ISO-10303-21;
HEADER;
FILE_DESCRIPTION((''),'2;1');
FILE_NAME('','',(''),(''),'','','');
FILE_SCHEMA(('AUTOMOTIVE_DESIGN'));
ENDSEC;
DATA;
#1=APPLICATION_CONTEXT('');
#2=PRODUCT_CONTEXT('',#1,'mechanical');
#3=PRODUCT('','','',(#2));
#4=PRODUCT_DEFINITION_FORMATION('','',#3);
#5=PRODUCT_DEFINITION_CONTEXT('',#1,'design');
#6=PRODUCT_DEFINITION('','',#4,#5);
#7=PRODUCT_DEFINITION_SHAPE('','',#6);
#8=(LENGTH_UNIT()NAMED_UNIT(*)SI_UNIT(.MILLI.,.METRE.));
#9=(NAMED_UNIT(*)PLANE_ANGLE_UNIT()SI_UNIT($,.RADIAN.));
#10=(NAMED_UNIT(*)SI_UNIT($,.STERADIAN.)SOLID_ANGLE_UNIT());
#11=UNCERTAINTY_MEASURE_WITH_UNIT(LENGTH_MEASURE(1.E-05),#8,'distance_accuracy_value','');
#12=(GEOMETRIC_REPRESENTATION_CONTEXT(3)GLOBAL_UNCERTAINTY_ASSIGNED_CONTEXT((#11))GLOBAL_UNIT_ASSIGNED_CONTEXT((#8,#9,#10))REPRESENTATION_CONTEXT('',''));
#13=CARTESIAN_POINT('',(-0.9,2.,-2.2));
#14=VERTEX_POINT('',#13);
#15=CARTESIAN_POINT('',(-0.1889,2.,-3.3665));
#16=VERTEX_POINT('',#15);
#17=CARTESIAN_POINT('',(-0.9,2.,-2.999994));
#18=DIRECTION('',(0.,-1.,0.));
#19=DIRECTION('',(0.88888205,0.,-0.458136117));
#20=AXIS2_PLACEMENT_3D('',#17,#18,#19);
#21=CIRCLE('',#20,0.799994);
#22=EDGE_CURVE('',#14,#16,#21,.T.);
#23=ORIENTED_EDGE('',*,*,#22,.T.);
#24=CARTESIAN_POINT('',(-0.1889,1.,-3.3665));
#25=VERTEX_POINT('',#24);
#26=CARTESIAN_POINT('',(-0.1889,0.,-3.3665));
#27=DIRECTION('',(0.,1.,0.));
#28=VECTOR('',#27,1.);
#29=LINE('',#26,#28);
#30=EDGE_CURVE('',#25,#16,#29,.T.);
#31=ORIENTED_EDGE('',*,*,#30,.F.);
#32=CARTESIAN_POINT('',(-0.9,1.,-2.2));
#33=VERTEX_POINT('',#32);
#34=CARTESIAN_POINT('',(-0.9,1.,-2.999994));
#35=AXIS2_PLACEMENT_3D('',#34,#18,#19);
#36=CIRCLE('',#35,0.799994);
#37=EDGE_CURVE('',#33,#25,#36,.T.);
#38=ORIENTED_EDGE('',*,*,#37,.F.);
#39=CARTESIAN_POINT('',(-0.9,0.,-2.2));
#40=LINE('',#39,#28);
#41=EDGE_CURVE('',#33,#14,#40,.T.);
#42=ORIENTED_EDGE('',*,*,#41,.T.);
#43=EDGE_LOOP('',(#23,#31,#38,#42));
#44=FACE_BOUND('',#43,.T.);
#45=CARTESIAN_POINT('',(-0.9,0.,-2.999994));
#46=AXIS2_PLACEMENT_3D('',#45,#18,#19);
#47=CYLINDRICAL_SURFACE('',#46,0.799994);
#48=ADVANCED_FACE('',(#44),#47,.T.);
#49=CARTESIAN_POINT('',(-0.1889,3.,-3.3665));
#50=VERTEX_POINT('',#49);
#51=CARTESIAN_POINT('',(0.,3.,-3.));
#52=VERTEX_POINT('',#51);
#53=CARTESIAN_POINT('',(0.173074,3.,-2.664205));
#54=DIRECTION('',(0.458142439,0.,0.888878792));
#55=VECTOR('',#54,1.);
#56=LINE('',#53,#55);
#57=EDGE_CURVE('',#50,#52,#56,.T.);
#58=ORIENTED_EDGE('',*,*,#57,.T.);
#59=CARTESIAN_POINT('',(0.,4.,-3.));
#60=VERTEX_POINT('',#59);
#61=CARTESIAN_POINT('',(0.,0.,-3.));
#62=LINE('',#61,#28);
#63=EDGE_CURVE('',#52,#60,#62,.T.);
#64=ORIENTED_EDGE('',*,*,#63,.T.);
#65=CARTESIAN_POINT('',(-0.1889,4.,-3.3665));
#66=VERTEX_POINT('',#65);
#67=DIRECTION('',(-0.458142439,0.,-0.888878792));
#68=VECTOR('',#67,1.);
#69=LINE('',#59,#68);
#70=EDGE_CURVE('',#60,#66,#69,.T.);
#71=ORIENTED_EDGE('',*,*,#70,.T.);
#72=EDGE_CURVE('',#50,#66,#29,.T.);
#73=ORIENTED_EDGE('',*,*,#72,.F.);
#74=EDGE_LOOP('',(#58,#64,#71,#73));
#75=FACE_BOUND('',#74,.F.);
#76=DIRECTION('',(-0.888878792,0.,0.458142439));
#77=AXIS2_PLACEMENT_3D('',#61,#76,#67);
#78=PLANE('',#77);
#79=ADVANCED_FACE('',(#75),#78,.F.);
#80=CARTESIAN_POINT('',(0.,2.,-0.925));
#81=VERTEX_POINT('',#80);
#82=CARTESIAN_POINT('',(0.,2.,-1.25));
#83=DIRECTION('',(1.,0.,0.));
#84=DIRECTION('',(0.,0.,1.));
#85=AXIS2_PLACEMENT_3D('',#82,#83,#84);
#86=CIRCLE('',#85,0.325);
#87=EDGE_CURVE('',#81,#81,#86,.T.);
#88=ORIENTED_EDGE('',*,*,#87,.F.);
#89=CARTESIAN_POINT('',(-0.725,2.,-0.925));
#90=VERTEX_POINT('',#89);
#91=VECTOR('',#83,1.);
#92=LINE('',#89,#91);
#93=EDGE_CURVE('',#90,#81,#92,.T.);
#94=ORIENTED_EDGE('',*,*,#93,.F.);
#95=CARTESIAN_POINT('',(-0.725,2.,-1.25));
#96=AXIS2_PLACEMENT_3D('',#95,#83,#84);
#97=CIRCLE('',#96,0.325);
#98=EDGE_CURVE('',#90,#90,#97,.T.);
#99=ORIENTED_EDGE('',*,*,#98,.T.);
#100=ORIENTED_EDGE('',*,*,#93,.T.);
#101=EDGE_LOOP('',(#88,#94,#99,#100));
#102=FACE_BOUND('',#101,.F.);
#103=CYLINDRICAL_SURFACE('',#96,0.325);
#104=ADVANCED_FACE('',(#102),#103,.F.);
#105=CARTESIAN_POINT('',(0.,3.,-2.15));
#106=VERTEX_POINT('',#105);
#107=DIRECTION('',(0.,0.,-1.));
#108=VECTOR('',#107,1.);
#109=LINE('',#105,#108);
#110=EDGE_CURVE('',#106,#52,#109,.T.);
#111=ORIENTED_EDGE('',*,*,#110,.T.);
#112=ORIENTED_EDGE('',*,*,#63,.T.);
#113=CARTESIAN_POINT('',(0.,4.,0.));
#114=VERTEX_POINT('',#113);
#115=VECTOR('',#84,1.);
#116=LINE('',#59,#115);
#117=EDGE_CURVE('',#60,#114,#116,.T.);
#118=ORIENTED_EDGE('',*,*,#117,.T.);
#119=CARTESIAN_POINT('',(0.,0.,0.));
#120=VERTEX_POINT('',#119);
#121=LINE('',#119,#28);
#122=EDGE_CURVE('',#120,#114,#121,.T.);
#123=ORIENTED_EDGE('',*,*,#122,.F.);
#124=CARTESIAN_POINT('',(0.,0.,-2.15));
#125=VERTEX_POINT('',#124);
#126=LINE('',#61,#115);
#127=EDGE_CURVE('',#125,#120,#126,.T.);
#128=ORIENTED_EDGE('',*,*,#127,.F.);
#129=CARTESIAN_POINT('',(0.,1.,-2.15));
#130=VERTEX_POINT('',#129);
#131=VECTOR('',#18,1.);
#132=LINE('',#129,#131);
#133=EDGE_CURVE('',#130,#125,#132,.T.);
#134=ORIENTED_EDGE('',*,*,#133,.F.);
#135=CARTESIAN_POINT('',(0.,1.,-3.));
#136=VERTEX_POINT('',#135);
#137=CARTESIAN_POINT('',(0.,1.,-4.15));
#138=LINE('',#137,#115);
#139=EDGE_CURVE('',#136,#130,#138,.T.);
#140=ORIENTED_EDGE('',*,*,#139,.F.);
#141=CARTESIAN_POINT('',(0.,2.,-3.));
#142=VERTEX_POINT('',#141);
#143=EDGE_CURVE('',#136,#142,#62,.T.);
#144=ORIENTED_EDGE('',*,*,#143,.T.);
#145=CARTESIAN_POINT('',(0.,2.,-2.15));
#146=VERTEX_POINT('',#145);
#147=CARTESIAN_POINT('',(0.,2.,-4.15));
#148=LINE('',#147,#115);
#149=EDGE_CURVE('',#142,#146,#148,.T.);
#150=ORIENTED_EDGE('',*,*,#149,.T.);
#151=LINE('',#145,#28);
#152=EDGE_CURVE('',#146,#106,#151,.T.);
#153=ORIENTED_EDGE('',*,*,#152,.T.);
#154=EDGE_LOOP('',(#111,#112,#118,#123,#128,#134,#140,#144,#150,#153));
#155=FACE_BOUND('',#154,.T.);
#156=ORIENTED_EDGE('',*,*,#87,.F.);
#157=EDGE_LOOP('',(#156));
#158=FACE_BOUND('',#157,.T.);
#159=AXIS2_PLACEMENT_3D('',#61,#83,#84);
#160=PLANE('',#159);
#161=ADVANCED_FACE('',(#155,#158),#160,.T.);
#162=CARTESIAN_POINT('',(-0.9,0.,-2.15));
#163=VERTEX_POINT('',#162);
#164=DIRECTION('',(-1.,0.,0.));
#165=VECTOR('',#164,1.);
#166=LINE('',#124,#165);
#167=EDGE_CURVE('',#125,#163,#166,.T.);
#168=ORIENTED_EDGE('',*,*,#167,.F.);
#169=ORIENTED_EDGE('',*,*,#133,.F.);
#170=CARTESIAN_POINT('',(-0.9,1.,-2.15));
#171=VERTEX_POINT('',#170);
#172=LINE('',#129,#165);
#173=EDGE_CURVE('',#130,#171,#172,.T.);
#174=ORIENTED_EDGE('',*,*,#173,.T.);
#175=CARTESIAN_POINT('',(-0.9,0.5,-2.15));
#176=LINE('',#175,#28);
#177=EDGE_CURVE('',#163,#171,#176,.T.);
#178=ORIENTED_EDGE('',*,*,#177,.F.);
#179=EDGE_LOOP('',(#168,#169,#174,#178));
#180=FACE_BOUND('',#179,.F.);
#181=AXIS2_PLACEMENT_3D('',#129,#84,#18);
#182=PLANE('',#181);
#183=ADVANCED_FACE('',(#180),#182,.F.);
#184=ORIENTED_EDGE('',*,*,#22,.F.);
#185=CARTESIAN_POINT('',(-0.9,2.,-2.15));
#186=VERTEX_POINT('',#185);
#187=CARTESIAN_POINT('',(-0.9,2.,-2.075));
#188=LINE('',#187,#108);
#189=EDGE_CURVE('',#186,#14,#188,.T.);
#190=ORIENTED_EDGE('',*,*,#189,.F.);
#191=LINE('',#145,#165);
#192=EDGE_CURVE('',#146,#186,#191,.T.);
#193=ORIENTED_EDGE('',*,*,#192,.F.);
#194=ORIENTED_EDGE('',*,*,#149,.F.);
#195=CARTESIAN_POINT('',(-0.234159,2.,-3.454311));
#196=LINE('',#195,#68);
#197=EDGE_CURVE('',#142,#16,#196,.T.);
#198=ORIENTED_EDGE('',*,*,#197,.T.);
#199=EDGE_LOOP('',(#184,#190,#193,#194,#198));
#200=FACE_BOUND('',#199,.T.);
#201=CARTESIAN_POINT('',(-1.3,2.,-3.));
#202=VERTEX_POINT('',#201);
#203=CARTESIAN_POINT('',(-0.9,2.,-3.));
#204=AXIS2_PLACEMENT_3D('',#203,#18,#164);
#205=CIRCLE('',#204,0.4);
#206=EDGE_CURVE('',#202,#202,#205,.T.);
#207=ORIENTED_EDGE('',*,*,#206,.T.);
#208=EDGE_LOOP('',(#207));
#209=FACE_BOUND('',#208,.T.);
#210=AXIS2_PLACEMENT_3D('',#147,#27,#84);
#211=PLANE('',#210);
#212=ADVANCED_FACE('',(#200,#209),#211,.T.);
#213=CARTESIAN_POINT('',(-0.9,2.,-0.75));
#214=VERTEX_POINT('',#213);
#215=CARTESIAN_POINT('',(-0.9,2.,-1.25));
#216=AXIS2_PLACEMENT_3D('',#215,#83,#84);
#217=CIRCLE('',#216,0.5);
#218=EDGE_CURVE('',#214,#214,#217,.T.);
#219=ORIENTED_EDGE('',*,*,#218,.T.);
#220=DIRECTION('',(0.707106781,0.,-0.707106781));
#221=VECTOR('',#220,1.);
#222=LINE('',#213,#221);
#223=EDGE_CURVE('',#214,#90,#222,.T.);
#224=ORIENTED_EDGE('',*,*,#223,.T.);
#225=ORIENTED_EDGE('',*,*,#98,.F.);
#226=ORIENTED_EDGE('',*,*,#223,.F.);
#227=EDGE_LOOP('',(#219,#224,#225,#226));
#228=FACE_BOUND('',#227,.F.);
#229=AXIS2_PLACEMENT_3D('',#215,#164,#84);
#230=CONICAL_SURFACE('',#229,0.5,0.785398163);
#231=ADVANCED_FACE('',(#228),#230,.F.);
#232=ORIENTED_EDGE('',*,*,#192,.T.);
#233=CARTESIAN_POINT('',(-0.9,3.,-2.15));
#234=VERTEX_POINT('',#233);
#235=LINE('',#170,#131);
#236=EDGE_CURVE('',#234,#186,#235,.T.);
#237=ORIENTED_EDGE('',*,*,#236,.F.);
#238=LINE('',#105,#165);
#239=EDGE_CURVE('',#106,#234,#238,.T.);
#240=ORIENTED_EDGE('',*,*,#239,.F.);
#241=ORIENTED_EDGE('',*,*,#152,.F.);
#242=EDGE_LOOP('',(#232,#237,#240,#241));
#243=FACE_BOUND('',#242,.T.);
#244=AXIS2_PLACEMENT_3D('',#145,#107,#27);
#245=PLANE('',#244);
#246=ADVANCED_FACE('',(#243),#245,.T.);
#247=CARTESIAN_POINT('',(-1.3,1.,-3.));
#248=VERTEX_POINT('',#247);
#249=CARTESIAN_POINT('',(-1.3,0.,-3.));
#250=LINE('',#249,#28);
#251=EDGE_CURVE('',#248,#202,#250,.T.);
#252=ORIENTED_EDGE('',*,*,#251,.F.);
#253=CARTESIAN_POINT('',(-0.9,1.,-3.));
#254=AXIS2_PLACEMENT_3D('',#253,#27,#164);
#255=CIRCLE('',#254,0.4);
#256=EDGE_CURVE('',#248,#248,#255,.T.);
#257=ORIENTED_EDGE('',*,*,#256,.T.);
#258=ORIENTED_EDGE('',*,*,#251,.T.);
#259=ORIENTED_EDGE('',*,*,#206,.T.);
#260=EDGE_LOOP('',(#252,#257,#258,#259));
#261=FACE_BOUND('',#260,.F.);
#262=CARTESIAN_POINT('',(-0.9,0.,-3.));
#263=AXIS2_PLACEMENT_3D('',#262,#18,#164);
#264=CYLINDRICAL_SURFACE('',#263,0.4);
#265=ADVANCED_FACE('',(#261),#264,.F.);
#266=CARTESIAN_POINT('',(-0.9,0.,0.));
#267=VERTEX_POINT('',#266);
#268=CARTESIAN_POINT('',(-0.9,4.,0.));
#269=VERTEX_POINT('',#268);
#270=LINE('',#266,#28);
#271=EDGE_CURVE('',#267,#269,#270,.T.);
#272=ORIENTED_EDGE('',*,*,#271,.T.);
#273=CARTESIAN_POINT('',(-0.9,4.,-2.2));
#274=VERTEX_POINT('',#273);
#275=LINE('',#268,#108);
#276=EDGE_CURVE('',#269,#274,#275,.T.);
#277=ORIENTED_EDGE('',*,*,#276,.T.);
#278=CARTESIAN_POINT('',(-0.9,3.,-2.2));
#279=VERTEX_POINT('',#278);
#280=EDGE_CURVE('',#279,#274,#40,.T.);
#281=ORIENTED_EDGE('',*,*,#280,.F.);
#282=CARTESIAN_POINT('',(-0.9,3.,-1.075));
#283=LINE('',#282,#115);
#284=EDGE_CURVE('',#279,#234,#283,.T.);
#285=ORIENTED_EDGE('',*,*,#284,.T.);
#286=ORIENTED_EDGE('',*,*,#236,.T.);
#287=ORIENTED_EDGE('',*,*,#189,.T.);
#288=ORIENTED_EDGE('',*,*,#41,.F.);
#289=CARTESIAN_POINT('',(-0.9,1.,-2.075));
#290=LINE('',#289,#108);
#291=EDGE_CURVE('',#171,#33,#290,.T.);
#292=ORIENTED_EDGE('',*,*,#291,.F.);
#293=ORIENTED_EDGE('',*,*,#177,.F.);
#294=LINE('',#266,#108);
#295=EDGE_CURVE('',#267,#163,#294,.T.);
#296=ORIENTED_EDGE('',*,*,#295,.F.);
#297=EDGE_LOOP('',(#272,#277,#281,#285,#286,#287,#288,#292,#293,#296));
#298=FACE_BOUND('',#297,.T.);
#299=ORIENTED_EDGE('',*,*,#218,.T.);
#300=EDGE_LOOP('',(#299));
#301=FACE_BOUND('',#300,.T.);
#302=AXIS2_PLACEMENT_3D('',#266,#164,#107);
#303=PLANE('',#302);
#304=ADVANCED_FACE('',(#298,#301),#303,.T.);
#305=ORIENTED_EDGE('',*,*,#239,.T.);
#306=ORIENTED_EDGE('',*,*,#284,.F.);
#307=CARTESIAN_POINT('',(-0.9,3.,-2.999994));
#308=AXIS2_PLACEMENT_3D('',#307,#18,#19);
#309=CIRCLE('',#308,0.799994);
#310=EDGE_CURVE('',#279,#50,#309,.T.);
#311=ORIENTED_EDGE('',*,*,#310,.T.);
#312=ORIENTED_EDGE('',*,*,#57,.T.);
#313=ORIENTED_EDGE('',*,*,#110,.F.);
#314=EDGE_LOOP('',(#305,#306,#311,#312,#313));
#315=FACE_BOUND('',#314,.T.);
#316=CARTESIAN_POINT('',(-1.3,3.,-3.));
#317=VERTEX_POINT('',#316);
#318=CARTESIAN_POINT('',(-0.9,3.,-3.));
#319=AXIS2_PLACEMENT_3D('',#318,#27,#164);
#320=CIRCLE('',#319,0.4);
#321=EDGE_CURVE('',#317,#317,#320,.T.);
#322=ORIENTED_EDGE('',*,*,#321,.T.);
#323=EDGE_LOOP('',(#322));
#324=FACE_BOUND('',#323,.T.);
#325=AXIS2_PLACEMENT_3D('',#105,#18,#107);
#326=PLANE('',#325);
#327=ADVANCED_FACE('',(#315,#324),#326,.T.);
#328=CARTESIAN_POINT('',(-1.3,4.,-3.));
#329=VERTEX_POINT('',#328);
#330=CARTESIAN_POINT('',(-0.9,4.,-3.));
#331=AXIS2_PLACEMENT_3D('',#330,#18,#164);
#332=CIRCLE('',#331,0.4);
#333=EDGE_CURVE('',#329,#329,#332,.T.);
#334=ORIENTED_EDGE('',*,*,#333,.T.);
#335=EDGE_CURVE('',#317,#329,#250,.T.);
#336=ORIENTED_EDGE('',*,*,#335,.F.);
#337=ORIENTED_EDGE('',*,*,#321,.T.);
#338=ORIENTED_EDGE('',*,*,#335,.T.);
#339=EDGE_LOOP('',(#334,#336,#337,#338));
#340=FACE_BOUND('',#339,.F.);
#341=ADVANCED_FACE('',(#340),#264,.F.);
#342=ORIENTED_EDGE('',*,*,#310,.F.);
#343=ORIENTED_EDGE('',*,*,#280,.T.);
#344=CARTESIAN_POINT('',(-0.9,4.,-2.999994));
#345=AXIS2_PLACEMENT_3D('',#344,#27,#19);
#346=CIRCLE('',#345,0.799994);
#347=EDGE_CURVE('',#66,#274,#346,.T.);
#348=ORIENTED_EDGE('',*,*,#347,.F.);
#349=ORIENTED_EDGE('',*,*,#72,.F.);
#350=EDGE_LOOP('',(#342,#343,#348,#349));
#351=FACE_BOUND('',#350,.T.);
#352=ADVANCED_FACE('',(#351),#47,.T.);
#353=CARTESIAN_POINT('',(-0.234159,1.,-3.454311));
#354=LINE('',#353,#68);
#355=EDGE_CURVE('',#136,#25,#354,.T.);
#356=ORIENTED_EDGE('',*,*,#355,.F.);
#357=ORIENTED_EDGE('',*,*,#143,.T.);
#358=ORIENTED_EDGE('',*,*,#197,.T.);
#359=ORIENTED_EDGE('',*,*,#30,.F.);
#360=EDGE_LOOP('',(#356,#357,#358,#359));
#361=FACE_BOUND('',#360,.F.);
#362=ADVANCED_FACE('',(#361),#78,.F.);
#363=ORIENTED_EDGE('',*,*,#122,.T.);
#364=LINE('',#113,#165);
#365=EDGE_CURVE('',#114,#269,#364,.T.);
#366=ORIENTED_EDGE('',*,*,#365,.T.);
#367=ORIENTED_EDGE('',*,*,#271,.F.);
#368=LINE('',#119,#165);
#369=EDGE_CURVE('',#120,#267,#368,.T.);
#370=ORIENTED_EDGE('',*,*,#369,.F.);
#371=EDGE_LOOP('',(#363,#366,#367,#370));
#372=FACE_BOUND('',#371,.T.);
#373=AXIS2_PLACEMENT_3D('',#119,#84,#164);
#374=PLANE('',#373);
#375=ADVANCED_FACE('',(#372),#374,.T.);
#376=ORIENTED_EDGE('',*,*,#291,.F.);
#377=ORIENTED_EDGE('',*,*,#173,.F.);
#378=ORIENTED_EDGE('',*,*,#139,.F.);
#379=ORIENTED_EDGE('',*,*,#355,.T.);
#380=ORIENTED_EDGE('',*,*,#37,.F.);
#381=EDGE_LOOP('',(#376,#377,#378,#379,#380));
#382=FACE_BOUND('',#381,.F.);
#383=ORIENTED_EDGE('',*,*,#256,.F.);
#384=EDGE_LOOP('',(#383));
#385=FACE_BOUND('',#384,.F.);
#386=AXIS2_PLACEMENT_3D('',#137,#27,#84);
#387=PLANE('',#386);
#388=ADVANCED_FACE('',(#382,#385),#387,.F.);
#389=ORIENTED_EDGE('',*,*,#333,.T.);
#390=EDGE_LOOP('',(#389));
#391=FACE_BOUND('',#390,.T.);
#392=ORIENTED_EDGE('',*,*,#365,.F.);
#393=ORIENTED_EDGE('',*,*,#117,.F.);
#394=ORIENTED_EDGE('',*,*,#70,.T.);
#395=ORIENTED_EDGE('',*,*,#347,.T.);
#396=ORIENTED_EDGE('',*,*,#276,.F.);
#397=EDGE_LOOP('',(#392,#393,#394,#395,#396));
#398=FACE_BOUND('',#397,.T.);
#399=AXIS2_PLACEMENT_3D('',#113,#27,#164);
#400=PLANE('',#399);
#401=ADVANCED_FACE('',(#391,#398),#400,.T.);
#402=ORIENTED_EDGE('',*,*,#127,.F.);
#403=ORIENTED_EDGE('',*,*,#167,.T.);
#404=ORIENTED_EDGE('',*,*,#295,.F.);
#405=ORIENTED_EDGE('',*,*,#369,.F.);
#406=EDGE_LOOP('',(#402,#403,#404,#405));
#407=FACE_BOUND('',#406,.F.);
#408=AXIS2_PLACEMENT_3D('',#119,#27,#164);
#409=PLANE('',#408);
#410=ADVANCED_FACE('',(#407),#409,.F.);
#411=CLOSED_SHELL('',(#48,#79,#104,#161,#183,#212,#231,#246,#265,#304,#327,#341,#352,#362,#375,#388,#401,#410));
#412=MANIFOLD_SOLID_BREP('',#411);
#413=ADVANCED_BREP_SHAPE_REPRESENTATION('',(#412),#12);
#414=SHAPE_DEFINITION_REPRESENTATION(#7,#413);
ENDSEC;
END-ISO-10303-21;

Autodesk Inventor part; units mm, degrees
ref_plane "YZ Plane" through (0, 0, 0) normal (1, 0, 0) x (0, 1, 0)
ref_plane "XZ Plane" through (0, 0, 0) normal (0, 1, 0) x (-1, 0, 0)
ref_plane "XY Plane" through (0, 0, 0) normal (0, 0, 1) x (1, 0, 0)
sketch "Skizze1" plane through (0, 0, 0) normal (0, 1, 0) x (-1, 0, 0)
  line L0 (0, 0) -> (0.9, 0)
  line L1 (0.9, 0) -> (0.9, -3)
  line L2 (0.9, -3) -> (0, -3) construction
  line L3 (0, -3) -> (0, 0)
  circle A0 centre (0.9, -3) radius 0.4
  arc A1 (0.1889, -3.3665) -> (0.9, -2.2) centre (0.9, -3) ccw
  line L4 (0, -3) -> (0.1889, -3.3665)
  dimension "d0" = 0.9
  dimension "d2" = 0.8
  dimension "d3" = 1.6
  dimension "d4" = 3
extrude "Extrusion1" add sketch "Skizze1" along normal blind 4
sketch "Skizze2" plane through (0, 0, 0) normal (1, 0, 0) x (0, 0, -1)
  line L0 (3, 0) -> (0, 0) construction
  line L1 (3, 0) -> (3, 4) construction
  line L2 (0, 4) -> (3, 4) construction
  line L3 (0, 0) -> (0, 4) construction
  line L4 (0, 4) -> (3, 4) construction
  line L5 (2.15, 4) -> (2.15, 0) construction
  line L6 (2.15, 0) -> (4.15, 0)
  line L7 (4.15, 0) -> (4.15, 1)
  line L8 (4.15, 1) -> (2.15, 1)
  line L9 (2.15, 1) -> (2.15, 0)
  line L10 (2.15, 3) -> (4.15, 3)
  line L11 (4.15, 3) -> (4.15, 2)
  line L12 (4.15, 2) -> (2.15, 2)
  line L13 (2.15, 2) -> (2.15, 3)
  dimension "d7" = 0.85
  dimension "d8" = 2
  dimension "d9" = 1
  dimension "d10" = 1
  dimension "d11" = 1
extrude "Extrusion2" cut sketch "Skizze2" against normal blind 4
sketch "Skizze4" plane through (-0.9, 0, 0) normal (-1, 0, 0) x (0, 0, 1)
  line L0 (-2.15, 1) -> (-2.15, 0) construction
  line L1 (0, 0) -> (-2.15, 0) construction
  line L2 (0, 0) -> (0, 4) construction
  line L3 (-2.2, 4) -> (0, 4) construction
  line L4 (-2.2, 3) -> (-2.2, 4) construction
  line L5 (-2.2, 3) -> (-2.15, 3) construction
  line L6 (-2.15, 3) -> (-2.15, 2) construction
  line L7 (-2.15, 2) -> (-2.2, 2) construction
  line L8 (-2.2, 1) -> (-2.2, 2) construction
  line L9 (-2.2, 1) -> (-2.15, 1) construction
  line L10 (0, 0) -> (0, 4) construction
  line L11 (0, 2) -> (-2.15, 2) construction
  line L12 (-1.25, 4) -> (-1.25, 0) construction
  point P0 (-1.25, 2)
  dimension "d22" = 1.25
hole "Bohrung2" at (-0.9, 2, -1.25) direction (1, 0, 0) diameter 0.65 end through all countersink diameter 1 countersink angle 90
properties part number "item_scharnier_1_teil"
